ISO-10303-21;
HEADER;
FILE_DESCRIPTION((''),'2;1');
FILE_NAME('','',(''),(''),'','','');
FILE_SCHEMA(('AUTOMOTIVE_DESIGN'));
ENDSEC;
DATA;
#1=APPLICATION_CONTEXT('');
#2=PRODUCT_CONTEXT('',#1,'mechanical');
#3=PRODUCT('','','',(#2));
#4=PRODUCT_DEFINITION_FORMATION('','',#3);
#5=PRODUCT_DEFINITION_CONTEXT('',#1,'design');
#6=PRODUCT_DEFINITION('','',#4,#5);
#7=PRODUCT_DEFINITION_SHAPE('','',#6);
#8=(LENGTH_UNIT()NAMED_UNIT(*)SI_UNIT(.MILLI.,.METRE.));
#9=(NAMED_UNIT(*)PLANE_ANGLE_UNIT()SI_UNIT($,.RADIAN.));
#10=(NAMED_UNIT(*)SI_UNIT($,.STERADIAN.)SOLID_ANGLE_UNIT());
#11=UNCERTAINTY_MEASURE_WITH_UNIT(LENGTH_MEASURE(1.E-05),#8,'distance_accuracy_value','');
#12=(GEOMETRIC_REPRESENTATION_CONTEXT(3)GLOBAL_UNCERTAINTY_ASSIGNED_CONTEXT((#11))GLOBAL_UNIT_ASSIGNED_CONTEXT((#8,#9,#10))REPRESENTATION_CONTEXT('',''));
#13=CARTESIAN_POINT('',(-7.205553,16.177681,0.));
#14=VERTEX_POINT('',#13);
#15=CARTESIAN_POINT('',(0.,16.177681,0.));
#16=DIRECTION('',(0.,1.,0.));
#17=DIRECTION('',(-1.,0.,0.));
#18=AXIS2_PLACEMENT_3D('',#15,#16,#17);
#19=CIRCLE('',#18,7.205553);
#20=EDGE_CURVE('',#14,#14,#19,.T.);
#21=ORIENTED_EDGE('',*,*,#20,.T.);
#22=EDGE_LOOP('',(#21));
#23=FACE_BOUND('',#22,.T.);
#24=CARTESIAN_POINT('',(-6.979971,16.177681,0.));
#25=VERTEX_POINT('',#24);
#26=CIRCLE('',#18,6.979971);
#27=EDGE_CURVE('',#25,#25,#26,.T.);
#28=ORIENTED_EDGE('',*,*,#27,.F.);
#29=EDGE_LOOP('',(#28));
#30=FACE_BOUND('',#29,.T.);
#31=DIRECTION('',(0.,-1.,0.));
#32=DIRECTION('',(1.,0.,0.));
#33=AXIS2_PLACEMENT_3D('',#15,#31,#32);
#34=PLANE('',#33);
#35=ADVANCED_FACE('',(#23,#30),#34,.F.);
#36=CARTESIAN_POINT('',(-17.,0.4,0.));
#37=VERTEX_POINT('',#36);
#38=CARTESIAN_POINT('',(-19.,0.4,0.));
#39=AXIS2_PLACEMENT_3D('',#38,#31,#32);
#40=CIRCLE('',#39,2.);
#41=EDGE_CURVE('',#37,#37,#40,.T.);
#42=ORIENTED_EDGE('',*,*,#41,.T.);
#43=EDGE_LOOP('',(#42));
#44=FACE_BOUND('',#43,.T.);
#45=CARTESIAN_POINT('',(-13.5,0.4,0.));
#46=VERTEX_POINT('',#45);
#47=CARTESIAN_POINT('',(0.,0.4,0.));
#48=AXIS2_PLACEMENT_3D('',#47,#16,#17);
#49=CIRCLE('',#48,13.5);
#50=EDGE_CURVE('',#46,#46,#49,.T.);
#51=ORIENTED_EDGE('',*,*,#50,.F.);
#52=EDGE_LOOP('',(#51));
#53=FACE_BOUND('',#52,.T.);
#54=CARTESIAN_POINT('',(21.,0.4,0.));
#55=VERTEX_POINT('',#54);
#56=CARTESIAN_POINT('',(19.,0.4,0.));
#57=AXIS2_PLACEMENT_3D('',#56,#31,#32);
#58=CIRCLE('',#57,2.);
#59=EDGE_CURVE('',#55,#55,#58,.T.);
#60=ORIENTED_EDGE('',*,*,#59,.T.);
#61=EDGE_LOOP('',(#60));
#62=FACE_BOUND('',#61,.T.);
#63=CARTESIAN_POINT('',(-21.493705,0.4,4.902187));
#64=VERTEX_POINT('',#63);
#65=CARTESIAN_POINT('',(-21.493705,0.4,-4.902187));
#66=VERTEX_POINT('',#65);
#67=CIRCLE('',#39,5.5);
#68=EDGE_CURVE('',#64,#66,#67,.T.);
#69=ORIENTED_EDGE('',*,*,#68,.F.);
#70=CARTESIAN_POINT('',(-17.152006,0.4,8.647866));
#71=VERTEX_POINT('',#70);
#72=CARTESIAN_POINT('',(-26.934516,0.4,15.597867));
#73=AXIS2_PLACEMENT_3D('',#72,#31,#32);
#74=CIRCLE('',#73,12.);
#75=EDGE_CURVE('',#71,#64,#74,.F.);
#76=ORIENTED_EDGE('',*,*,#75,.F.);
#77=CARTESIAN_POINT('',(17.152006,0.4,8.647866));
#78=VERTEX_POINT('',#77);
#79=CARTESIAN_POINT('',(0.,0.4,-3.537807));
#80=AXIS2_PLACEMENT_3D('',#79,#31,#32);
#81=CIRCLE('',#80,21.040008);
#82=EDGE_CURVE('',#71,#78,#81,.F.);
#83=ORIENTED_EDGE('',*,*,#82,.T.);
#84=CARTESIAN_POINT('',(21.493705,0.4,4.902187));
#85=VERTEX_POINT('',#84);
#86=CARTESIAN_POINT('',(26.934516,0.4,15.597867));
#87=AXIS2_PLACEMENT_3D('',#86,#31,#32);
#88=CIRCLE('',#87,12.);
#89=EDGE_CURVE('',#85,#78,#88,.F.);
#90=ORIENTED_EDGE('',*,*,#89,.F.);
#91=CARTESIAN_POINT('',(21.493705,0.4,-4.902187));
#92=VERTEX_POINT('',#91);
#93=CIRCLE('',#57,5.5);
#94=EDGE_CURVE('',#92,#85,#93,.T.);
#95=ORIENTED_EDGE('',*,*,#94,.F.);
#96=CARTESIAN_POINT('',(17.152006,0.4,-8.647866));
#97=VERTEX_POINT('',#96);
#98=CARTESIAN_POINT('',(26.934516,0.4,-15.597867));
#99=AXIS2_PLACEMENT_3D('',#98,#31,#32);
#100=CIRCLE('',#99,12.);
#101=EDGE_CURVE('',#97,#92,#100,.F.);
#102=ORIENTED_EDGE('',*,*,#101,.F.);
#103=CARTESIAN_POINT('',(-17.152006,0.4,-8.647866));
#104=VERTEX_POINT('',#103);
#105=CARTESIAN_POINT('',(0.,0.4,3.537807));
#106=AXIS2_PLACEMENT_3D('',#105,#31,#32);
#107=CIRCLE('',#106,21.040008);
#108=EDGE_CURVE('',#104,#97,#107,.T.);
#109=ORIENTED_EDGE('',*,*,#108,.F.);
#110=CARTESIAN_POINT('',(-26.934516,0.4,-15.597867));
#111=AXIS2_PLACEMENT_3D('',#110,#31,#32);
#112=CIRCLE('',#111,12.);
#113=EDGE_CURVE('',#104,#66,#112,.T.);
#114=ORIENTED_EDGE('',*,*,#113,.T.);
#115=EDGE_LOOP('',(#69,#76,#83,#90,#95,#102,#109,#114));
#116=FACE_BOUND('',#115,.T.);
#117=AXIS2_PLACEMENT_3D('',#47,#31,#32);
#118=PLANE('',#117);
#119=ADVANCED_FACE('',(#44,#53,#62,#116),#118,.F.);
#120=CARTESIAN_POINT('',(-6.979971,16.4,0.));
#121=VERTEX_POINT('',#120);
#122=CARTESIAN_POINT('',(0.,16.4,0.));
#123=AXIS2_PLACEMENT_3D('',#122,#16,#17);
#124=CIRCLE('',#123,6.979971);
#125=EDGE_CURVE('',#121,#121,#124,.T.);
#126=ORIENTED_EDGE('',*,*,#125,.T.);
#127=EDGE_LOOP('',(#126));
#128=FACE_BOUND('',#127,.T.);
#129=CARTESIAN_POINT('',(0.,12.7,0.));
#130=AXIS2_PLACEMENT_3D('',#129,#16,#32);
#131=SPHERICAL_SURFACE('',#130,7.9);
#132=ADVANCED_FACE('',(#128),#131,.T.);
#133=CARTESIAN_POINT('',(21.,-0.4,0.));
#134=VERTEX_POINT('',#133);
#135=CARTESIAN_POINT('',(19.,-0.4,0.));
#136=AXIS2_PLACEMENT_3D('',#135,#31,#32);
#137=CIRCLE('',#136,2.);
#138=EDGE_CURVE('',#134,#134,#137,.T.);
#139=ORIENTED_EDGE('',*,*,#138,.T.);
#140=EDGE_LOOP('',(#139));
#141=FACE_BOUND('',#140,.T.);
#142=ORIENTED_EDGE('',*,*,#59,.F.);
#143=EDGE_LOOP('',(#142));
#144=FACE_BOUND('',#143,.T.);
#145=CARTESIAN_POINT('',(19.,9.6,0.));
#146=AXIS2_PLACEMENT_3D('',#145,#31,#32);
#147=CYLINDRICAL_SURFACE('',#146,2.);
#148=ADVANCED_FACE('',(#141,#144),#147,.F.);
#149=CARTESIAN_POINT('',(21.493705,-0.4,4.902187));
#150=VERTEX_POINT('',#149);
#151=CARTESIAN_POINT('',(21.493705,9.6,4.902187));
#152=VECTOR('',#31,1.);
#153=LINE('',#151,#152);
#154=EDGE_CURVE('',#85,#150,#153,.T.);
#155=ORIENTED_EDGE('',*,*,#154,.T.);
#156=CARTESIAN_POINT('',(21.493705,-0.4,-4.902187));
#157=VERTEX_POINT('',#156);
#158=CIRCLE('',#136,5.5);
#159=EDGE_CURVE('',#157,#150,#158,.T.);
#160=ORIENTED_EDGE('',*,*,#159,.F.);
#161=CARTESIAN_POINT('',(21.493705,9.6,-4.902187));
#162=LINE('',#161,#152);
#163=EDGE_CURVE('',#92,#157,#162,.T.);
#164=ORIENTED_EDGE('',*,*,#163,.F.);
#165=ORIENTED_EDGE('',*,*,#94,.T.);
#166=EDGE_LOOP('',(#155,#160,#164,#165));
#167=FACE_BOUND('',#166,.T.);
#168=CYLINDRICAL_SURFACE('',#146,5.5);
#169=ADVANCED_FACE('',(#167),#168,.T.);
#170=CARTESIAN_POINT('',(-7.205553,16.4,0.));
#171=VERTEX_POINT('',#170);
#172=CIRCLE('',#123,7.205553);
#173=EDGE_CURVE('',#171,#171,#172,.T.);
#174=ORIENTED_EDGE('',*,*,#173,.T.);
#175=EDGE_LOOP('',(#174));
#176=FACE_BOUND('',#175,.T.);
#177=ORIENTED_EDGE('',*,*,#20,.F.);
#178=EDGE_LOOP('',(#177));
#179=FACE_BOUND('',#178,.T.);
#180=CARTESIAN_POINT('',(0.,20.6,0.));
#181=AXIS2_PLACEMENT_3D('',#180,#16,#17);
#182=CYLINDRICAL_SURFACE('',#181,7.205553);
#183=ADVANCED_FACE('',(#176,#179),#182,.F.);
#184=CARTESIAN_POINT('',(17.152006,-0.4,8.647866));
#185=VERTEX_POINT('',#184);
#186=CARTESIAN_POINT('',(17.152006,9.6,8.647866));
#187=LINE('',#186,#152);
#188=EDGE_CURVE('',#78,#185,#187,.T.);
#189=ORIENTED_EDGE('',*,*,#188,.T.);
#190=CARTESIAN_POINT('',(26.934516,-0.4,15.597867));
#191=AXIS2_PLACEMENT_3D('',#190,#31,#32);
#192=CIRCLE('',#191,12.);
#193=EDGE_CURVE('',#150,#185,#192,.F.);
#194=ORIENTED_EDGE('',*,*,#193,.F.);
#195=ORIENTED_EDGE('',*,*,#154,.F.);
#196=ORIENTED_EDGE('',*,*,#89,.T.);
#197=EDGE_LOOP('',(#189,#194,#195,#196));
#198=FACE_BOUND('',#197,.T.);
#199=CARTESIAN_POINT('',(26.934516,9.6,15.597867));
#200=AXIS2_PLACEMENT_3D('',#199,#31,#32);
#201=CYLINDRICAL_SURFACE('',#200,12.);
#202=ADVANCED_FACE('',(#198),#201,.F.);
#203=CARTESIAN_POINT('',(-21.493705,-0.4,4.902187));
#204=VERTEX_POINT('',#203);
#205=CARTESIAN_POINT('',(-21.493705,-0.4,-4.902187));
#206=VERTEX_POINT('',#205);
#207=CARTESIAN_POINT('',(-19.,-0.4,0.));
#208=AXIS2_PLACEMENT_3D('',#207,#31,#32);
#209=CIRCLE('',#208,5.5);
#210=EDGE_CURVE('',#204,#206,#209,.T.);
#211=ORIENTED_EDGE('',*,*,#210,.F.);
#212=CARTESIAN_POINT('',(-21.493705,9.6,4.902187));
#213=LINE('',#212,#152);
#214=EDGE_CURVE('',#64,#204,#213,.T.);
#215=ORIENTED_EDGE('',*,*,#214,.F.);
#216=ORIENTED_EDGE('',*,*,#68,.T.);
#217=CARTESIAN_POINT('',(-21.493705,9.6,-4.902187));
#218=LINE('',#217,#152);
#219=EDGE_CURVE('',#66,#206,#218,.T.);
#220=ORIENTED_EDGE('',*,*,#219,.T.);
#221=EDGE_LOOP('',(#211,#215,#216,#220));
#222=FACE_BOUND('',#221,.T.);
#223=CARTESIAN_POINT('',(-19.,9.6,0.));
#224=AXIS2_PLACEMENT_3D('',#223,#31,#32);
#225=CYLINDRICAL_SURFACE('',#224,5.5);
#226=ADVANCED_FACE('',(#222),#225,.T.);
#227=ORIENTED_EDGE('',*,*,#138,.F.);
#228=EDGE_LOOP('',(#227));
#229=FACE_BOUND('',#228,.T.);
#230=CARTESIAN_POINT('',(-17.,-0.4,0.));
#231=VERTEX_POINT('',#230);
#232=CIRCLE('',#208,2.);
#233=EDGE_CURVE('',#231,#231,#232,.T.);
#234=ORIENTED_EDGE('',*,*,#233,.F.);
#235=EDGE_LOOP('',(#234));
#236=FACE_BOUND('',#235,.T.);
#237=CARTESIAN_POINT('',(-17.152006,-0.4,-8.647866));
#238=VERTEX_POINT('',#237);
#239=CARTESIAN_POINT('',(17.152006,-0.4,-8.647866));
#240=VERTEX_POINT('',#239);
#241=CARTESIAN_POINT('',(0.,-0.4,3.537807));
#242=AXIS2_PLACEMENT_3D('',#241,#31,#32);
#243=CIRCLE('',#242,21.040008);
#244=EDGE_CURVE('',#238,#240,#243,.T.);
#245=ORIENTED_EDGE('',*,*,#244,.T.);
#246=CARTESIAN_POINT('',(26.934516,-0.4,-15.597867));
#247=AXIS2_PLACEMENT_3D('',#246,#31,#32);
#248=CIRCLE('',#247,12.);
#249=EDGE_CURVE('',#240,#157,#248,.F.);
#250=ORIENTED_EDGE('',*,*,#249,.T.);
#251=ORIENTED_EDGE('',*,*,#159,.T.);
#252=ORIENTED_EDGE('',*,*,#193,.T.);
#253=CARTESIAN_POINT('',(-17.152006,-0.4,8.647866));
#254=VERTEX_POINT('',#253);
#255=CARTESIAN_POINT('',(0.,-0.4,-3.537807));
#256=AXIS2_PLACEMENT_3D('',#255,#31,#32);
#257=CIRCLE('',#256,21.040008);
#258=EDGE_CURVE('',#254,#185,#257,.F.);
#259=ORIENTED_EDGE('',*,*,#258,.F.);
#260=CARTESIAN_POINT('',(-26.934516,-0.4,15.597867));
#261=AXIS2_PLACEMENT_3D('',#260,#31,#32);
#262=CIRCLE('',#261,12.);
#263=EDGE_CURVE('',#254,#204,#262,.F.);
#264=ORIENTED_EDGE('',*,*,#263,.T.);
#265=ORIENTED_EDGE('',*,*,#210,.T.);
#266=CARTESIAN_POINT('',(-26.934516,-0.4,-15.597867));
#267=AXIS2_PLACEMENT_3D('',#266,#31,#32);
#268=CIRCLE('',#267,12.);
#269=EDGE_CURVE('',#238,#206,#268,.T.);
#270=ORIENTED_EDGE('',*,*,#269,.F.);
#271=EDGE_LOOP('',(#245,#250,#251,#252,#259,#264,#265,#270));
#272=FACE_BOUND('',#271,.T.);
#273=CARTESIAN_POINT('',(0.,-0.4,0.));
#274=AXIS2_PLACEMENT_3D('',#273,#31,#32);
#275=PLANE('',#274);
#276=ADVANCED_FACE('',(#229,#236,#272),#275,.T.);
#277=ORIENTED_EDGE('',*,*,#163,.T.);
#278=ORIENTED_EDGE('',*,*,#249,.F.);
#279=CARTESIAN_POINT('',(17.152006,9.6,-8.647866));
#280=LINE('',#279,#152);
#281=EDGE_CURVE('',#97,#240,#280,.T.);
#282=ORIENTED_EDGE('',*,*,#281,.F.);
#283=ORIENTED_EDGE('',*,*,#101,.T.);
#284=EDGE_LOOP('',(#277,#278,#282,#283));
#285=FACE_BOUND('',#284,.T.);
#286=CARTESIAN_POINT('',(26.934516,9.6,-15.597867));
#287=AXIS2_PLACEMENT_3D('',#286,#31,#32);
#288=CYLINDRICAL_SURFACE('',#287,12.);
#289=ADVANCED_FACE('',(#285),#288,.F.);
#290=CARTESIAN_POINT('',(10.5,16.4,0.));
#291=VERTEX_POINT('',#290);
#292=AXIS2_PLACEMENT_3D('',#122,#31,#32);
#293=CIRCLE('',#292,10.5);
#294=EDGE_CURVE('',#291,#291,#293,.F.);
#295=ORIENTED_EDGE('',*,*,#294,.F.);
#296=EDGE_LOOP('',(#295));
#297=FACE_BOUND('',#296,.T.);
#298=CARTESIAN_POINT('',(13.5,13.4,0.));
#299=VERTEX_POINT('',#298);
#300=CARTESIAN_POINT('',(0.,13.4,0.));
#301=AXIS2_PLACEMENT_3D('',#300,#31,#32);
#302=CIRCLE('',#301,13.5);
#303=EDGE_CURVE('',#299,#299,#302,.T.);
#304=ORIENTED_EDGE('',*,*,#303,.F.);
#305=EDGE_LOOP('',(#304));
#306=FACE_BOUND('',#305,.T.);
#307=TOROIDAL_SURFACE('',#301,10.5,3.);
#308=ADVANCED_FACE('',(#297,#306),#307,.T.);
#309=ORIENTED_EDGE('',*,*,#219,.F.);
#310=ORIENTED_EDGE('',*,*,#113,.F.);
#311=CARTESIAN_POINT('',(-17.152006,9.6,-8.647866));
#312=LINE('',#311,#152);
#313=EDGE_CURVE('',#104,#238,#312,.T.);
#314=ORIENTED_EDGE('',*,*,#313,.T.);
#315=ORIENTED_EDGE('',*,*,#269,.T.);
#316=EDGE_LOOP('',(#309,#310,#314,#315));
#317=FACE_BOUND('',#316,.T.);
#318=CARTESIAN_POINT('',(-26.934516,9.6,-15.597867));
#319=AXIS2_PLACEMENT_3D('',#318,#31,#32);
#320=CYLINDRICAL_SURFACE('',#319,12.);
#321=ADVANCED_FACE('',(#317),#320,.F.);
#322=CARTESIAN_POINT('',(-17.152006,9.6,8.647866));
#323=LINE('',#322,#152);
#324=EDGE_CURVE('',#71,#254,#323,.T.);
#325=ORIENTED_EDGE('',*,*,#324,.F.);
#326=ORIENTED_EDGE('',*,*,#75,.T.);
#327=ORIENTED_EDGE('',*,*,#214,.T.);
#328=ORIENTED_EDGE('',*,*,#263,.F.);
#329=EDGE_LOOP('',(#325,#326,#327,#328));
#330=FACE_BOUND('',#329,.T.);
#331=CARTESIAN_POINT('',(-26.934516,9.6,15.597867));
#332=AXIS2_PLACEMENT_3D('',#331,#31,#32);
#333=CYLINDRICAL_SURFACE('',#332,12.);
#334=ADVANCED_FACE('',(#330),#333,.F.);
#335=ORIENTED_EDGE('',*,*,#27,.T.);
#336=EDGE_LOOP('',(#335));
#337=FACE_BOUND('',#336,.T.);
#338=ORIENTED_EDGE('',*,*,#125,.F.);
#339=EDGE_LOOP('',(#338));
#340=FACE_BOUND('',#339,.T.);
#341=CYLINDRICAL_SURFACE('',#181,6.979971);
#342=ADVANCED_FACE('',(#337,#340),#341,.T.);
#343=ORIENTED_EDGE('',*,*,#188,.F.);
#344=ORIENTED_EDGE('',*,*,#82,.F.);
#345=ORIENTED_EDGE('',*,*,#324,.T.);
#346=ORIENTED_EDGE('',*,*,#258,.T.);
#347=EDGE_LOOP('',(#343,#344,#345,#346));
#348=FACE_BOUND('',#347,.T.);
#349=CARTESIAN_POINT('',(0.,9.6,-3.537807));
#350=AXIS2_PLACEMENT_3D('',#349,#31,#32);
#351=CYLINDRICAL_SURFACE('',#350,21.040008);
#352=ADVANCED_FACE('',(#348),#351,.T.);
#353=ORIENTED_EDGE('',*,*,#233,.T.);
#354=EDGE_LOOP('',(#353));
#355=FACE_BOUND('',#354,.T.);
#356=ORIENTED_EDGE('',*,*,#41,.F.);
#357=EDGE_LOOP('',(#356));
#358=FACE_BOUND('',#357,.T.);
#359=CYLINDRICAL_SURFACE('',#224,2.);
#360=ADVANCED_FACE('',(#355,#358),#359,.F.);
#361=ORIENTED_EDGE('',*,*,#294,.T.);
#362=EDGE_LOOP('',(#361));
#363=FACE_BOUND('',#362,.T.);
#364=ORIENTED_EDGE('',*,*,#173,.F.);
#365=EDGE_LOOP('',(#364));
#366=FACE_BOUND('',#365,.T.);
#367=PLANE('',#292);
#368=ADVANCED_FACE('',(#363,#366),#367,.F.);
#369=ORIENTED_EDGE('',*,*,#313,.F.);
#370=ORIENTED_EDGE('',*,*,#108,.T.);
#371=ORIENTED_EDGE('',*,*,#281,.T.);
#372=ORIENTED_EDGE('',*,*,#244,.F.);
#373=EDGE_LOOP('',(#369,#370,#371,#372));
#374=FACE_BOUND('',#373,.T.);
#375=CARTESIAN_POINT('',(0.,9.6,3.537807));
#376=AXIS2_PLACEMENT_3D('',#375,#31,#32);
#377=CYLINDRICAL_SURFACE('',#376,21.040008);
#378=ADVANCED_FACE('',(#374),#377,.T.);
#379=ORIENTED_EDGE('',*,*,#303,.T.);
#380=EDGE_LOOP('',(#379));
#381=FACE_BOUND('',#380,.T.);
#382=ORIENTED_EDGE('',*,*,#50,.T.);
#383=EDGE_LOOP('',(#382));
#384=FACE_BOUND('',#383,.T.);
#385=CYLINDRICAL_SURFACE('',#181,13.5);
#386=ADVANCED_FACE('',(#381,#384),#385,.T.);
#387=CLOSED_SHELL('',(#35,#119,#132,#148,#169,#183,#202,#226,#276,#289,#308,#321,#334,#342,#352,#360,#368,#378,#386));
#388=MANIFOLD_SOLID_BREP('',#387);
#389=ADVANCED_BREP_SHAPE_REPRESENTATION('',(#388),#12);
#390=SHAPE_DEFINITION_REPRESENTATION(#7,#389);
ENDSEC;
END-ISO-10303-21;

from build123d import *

# Parameters (mm, degrees)
FILLET_1_R          = 3
SKETCH_2_R          = 2
CUT_EXTRUDE_1_DEPTH = 10


with BuildPart() as part:
    # 草图1 → 旋转1 (revolve)
    with BuildSketch(Plane.XY):
        Polygon((0, -0.4), (0, 16.4), (-6.979971347, 16.4), (-6.979971347, 16.177681197), (-7.205553414, 16.177681197), (-7.205553414, 16.4), (-13.5, 16.4), (-13.5, 0.4), (-24.5, 0.4), (-24.5, -0.4), align=None)
    revolve(axis=Axis((0, 20.6, 0), (0, -1, 0)))

    # 草图1<3> → 旋转2 (revolve)
    with BuildSketch(Plane.XY):
        with BuildLine():
            Line((-6.979971347, 16.4), (0, 16.4))
            Line((0, 16.4), (0, 20.6))
            ThreePointArc((0, 20.6), (-4.073082371, 19.4690472), (-6.979971347, 16.4))
        make_face()
    revolve(axis=Axis((0, 20.6, 0), (0, -1, 0)))

    # 圆角1
    fillet_1_edges = [part.edges().sort_by_distance(p)[0] for p in [
        (13.5, 16.4, 0),
    ]]
    fillet(fillet_1_edges, radius=FILLET_1_R)

    # 草图2 → 切除-拉伸1 (cut)
    with BuildSketch(Plane.XZ.offset(0.4)):
        with Locations((-19, 0)):
            Circle(SKETCH_2_R)
        with Locations((19, 0)):
            Circle(SKETCH_2_R)
        with BuildLine():
            ThreePointArc((21.493704912, 4.90218684), (23.688569985, 2.875293288), (24.5, 0))
            ThreePointArc((24.5, 0), (0, 24.5), (-24.5, 0))
            ThreePointArc((-24.5, 0), (-23.688569985, 2.875293288), (-21.493704912, 4.90218684))
            ThreePointArc((-21.493704912, 4.90218684), (-19.095836123, 6.511883307), (-17.152006375, 8.647866302))
            ThreePointArc((-17.152006375, 8.647866302), (0, 17.502201551), (17.152006375, 8.647866302))
            ThreePointArc((17.152006375, 8.647866302), (19.095836123, 6.511883307), (21.493704912, 4.90218684))
        make_face()
        with BuildLine():
            ThreePointArc((-24.5, 0), (0, -24.5), (24.5, 0))
            ThreePointArc((24.5, 0), (23.688569985, -2.875293288), (21.493704912, -4.90218684))
            ThreePointArc((21.493704912, -4.90218684), (19.095836123, -6.511883307), (17.152006375, -8.647866302))
            ThreePointArc((17.152006375, -8.647866302), (0, -17.502201551), (-17.152006375, -8.647866302))
            ThreePointArc((-17.152006375, -8.647866302), (-19.095836123, -6.511883307), (-21.493704912, -4.90218684))
            ThreePointArc((-21.493704912, -4.90218684), (-23.688569985, -2.875293288), (-24.5, 0))
        make_face()
    extrude(amount=-CUT_EXTRUDE_1_DEPTH, mode=Mode.SUBTRACT)


solid = part.part
